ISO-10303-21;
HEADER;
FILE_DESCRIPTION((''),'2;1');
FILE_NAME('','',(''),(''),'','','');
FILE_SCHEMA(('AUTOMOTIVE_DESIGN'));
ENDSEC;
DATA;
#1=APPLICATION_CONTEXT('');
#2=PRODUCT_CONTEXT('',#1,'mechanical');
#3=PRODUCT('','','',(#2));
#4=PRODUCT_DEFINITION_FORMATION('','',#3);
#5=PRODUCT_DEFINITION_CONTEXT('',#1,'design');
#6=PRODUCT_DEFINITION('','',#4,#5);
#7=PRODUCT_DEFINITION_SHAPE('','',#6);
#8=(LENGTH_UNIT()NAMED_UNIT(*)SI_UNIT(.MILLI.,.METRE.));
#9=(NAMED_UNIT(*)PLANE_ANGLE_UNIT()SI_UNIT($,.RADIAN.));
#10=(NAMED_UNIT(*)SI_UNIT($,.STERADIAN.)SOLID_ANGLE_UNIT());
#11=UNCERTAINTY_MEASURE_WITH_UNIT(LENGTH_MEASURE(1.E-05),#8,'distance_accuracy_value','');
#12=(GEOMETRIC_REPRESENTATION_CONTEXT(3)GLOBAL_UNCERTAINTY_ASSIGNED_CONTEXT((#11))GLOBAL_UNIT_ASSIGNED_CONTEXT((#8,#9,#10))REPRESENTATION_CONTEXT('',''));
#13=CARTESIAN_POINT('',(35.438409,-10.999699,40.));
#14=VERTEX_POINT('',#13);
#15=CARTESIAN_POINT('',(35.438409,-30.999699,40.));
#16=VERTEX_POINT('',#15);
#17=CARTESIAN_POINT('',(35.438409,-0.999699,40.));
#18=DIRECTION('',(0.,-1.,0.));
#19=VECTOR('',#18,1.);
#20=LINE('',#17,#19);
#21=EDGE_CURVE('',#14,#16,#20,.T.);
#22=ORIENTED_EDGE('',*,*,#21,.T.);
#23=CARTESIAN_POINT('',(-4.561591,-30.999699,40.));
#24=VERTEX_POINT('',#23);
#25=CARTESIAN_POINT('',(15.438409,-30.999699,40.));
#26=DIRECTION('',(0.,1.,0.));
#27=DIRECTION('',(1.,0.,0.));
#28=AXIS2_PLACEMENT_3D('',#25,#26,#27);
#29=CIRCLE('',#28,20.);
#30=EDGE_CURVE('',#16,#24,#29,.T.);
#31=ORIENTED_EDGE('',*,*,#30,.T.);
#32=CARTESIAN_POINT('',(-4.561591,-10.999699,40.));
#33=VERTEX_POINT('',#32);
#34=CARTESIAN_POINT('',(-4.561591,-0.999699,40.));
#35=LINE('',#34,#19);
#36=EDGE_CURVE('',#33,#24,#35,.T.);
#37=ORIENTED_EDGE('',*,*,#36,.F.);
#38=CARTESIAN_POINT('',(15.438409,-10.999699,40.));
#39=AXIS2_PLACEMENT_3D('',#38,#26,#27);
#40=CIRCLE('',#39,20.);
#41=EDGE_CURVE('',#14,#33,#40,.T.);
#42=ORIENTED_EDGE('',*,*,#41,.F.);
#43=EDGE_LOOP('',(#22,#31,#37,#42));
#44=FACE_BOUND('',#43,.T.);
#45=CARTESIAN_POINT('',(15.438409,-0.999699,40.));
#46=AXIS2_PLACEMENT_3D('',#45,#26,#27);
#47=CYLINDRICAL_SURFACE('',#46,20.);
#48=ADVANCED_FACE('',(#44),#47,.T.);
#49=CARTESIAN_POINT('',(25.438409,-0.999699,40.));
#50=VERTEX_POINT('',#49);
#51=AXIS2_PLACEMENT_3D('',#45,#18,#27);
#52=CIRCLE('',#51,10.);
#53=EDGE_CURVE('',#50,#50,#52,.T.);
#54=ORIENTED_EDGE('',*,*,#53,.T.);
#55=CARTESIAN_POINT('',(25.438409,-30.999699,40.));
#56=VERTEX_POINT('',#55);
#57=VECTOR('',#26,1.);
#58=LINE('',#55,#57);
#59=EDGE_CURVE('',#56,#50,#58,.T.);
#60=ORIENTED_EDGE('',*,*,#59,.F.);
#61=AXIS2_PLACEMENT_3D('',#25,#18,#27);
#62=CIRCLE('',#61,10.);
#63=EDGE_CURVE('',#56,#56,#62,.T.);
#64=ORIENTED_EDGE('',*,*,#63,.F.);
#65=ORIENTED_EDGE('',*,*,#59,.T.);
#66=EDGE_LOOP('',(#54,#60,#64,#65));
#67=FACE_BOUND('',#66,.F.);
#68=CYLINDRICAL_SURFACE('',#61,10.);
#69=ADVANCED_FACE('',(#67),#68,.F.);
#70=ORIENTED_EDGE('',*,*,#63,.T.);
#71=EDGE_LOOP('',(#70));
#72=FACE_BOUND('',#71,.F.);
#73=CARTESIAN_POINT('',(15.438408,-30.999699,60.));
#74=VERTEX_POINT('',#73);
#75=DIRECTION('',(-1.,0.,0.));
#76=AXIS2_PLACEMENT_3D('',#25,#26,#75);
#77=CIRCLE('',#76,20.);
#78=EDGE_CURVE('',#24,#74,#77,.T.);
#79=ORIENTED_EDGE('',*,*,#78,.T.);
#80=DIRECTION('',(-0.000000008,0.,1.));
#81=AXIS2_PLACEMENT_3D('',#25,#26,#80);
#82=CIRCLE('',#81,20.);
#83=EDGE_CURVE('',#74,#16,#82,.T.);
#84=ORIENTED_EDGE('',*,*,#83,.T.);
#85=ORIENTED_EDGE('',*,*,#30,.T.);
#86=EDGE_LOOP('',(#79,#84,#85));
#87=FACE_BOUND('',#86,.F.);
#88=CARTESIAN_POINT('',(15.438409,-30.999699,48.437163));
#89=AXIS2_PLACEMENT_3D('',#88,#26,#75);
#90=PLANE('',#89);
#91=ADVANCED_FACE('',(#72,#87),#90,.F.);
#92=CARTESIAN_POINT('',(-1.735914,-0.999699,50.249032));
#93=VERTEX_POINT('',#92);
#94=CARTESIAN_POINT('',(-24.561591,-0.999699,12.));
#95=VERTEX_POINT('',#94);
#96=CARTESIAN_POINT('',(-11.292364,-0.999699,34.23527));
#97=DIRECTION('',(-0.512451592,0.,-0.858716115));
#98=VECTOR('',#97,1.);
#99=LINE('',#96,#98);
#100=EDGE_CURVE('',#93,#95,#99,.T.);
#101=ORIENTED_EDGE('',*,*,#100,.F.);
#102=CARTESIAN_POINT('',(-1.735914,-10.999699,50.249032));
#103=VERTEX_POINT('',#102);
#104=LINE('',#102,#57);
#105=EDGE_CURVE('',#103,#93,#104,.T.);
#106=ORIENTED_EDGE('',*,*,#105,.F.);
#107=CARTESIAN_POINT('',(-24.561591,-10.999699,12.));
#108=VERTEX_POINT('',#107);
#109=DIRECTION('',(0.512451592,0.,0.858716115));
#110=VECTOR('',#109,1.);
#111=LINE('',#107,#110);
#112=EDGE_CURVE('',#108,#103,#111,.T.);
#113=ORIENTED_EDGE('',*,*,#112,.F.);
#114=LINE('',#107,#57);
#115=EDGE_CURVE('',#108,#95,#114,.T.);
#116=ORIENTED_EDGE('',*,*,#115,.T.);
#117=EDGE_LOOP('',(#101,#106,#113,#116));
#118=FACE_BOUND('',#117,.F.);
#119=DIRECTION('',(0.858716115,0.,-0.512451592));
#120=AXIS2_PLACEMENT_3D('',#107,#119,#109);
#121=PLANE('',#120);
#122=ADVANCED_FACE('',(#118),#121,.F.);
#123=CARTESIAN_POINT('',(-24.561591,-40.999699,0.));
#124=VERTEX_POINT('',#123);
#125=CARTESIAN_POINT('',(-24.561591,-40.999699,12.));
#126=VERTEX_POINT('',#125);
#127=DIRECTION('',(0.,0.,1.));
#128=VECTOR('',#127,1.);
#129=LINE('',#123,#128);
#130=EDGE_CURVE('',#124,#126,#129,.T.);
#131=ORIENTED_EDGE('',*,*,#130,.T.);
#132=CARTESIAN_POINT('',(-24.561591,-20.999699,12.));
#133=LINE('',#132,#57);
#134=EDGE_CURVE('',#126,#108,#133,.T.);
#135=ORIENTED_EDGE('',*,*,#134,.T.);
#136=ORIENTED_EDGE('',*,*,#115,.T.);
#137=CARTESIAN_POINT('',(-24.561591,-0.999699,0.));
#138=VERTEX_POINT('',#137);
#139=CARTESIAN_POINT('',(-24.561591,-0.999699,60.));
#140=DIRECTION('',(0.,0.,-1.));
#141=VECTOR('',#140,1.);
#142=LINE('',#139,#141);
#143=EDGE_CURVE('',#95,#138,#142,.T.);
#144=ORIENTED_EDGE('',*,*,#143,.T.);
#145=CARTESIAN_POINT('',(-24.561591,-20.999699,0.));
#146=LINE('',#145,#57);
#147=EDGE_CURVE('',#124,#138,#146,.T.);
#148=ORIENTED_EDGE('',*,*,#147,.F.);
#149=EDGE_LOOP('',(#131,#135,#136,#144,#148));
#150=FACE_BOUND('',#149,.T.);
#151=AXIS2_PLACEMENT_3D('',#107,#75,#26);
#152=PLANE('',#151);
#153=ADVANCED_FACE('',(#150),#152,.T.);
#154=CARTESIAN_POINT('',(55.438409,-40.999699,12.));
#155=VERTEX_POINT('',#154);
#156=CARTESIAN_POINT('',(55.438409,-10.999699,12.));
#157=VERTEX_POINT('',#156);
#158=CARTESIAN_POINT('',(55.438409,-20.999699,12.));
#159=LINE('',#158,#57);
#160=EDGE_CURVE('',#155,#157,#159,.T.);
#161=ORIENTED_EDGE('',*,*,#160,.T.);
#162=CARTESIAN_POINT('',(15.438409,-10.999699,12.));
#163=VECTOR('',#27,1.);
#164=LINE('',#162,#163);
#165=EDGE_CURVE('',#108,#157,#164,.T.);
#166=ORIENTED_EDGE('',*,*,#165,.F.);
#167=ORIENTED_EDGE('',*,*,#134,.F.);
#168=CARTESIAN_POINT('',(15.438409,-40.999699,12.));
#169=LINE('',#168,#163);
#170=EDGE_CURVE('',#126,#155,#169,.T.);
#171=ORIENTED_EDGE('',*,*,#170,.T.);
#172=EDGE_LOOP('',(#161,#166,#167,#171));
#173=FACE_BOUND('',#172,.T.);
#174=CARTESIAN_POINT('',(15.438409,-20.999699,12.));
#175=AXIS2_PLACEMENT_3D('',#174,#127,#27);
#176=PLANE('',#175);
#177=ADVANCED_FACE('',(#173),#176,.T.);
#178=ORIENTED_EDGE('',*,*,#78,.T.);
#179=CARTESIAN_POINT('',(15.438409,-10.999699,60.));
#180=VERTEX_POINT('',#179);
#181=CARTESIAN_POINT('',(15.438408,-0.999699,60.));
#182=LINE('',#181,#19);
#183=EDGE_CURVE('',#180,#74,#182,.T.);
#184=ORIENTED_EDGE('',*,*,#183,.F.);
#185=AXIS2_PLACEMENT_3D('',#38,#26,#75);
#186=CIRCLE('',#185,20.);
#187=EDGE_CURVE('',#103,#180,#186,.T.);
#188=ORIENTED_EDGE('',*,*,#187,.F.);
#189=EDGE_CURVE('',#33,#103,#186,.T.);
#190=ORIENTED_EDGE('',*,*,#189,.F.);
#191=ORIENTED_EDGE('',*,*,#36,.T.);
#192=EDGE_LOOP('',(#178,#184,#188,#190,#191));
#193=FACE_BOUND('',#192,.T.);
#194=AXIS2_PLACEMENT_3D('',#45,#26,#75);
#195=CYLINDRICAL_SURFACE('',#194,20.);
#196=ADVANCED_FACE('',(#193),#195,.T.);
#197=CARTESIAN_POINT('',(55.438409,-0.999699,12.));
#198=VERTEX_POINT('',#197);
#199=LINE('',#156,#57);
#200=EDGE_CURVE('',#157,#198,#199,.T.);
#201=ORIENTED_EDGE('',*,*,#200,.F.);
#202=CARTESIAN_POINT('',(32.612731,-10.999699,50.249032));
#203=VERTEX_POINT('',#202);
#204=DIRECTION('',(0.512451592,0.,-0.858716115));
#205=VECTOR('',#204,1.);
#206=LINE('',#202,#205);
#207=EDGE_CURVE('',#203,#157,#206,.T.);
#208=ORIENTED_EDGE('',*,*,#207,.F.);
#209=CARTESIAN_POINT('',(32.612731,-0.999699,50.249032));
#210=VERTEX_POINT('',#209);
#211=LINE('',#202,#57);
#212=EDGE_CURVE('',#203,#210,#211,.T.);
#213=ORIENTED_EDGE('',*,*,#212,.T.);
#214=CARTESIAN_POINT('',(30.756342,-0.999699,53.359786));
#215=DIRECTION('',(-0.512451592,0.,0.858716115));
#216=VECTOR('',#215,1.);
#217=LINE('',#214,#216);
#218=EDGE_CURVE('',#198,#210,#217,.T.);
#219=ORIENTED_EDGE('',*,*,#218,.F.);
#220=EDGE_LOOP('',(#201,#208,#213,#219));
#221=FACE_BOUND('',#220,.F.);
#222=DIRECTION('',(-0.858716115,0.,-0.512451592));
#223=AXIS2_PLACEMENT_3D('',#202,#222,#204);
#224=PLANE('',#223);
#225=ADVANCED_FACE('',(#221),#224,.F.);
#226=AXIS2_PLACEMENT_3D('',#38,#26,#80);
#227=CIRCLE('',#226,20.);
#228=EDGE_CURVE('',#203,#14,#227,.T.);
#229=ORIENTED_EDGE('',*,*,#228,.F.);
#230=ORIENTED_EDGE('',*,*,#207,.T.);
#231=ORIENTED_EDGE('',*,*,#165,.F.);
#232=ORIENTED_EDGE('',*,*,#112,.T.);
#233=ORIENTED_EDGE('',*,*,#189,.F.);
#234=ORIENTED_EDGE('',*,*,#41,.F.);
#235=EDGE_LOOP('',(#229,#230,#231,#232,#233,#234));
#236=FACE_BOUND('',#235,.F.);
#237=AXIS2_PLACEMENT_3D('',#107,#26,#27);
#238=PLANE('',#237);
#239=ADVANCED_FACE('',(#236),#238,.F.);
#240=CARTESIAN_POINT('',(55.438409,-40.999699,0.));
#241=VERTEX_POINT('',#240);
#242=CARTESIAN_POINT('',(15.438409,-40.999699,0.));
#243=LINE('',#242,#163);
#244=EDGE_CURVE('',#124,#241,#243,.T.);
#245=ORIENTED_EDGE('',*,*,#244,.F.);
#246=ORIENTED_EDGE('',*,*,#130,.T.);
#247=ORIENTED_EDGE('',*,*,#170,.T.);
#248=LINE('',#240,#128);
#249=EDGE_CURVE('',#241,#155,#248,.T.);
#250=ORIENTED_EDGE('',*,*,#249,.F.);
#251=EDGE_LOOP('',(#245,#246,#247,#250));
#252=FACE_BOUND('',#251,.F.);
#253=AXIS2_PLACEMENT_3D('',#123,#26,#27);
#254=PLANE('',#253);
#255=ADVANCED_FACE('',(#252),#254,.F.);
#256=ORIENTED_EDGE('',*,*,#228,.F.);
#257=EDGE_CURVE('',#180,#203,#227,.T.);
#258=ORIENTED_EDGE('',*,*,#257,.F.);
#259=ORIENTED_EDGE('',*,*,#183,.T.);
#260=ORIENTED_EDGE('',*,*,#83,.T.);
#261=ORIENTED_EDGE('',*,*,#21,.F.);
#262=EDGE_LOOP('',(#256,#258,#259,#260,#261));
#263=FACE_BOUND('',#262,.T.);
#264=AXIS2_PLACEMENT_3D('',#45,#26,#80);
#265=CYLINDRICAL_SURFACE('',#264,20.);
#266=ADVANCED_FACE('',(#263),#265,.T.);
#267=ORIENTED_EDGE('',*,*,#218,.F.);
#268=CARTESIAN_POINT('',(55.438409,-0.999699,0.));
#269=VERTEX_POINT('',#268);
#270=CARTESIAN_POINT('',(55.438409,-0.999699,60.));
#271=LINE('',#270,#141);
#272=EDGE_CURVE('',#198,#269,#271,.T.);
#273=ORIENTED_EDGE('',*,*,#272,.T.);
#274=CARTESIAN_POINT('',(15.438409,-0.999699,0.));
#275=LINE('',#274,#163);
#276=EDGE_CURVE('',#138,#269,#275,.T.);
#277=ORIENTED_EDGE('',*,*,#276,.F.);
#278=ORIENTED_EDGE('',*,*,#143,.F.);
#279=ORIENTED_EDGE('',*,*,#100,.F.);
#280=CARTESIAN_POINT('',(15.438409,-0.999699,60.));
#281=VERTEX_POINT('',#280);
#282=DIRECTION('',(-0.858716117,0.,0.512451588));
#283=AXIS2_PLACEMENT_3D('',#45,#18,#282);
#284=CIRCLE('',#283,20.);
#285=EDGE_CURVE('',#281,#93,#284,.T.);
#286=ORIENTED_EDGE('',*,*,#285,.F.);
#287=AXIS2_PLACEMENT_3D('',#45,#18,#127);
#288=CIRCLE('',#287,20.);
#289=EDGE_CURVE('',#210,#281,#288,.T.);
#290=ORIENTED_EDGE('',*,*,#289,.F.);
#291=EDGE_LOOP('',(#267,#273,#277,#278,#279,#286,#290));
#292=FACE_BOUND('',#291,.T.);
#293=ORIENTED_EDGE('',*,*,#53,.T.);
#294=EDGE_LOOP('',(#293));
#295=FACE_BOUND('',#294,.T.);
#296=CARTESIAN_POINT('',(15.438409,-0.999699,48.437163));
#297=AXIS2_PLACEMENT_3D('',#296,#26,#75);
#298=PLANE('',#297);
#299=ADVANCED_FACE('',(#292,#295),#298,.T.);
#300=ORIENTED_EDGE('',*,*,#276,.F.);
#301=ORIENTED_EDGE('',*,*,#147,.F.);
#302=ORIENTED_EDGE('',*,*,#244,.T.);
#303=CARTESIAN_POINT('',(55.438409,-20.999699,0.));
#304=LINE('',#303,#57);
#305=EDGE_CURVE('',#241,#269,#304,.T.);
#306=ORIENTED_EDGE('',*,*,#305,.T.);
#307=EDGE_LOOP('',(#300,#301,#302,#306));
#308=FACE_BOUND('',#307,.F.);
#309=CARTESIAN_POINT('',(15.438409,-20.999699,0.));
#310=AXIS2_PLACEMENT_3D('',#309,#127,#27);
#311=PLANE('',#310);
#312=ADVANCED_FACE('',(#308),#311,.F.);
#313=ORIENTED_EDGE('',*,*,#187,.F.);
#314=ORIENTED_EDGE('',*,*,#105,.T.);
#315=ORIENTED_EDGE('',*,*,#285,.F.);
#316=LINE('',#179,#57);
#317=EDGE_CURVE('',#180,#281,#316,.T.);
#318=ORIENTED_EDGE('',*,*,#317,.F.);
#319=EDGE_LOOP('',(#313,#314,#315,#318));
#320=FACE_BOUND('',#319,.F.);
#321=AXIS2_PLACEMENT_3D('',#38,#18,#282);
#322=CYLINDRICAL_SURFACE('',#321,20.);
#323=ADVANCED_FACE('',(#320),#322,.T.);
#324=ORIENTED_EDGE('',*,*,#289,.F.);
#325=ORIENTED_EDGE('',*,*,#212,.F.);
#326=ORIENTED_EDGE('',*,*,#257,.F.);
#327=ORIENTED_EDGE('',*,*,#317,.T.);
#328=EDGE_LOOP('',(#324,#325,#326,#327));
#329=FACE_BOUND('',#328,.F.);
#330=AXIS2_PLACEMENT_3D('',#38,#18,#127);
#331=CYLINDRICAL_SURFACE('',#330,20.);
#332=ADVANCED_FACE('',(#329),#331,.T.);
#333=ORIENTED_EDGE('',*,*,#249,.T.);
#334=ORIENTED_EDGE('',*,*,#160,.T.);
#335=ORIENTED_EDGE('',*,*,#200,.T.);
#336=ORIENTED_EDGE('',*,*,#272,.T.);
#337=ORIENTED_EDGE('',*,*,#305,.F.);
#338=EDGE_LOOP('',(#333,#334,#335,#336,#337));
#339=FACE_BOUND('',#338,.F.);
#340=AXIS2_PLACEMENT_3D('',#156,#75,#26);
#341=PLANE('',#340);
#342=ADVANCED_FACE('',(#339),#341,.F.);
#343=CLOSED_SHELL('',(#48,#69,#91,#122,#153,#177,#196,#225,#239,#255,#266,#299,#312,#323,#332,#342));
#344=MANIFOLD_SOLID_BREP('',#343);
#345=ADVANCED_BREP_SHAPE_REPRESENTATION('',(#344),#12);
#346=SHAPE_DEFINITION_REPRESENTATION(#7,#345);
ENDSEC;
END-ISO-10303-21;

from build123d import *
from build123d import SkipClean  # not in build123d's __all__

# Parameters (mm, degrees)
F0_W      = 80
F0_H      = 40
F1_DEPTH  = 12
F2_W      = 80
F2_H      = 10
F3_DEPTH  = 48
F6_DEPTH  = 30
F7_R      = 10
F8_DEPTH  = 282
F10_DEPTH = 25


# Not quite as in the source:
# - a feature names something its author has since deleted; it is built from what else it names


with BuildPart() as f1:
    # F0 (on Top) → F1 (new body)
    with BuildSketch(Plane.XY):
        with Locations((15.4384085536, -20.999699384)):
            Rectangle(F0_W, F0_H)
    extrude(amount=F1_DEPTH)

    # F2 (on face) → F3 (join)
    with BuildSketch(Plane.XY.offset(12)):
        with Locations((15.4384085536, -5.999699384)):
            Rectangle(F2_W, F2_H)
    extrude(amount=F3_DEPTH)

    # F5 (on face) → F6 (join)
    with BuildSketch(Plane(origin=(0, -0.999699384, 0), x_dir=(-1, 0, 0), z_dir=(0, 1, 0))):
        with BuildLine():
            ThreePointArc((4.5615914464, 40), (-1.2962728753, 54.1421355692), (-15.4384083992, 60))
            ThreePointArc((-15.4384083992, 60), (-29.5805441228, 54.1421356783), (-35.4384085536, 40))
            Line((-35.4384085536, 40), (-25.4384085536, 40))
            ThreePointArc((-25.4384085536, 40), (-15.4384085536, 50), (-5.4384085536, 40))
            Line((-5.4384085536, 40), (4.5615914464, 40))
        make_face()
        with BuildLine():
            Line((-25.4384085536, 40), (-5.4384085536, 40))
            ThreePointArc((-5.4384085536, 40), (-15.4384085536, 50), (-25.4384085536, 40))
        make_face()
        with BuildLine():
            ThreePointArc((-25.4384085536, 40), (-15.4384085536, 30), (-5.4384085536, 40))
            Line((-5.4384085536, 40), (-25.4384085536, 40))
        make_face()
        with BuildLine():
            ThreePointArc((-35.4384085536, 40), (-15.4384085536, 20), (4.5615914464, 40))
            Line((4.5615914464, 40), (-5.4384085536, 40))
            ThreePointArc((-5.4384085536, 40), (-15.4384085536, 30), (-25.4384085536, 40))
            Line((-25.4384085536, 40), (-35.4384085536, 40))
        make_face()
    extrude(amount=-F6_DEPTH)

    # F7 (on face) → F8 (cut)
    with BuildSketch(Plane.XZ.offset(30.999699384)):
        with Locations((15.4384085536, 40)):
            Circle(F7_R)
    extrude(amount=-F8_DEPTH, mode=Mode.SUBTRACT)

    # F9 (on face) → F10 (cut)
    with BuildSketch(Plane.XZ.offset(10.999699384)):
        Polygon((55.4384085536, 60), (26.7936958102, 60), (32.6127306701, 50.2490321416), (55.4384085536, 12), align=None)
        with BuildLine():
            Line((32.6127306701, 50.2490321416), (26.7936958102, 60))
            Line((26.7936958102, 60), (15.4384085536, 60))
            ThreePointArc((15.4384085536, 60), (25.3131074647, 57.392248889), (32.6127306701, 50.2490321416))
        make_face()
        with BuildLine():
            ThreePointArc((-1.7359137949, 50.2490317528), (5.5637094457, 57.3922487772), (15.4384085536, 60))
            Line((15.4384085536, 60), (4.083121297, 60))
            Line((4.083121297, 60), (-1.7359137949, 50.2490317528))
        make_face()
        Polygon((-1.7359137949, 50.2490317528), (4.083121297, 60), (-24.5615914464, 60), (-24.5615914464, 12), align=None)
    with SkipClean():  # cleaning this boolean's faces spoils the solid; the shape is the same uncleaned
        extrude(amount=-F10_DEPTH, mode=Mode.SUBTRACT)


solid = f1.part
